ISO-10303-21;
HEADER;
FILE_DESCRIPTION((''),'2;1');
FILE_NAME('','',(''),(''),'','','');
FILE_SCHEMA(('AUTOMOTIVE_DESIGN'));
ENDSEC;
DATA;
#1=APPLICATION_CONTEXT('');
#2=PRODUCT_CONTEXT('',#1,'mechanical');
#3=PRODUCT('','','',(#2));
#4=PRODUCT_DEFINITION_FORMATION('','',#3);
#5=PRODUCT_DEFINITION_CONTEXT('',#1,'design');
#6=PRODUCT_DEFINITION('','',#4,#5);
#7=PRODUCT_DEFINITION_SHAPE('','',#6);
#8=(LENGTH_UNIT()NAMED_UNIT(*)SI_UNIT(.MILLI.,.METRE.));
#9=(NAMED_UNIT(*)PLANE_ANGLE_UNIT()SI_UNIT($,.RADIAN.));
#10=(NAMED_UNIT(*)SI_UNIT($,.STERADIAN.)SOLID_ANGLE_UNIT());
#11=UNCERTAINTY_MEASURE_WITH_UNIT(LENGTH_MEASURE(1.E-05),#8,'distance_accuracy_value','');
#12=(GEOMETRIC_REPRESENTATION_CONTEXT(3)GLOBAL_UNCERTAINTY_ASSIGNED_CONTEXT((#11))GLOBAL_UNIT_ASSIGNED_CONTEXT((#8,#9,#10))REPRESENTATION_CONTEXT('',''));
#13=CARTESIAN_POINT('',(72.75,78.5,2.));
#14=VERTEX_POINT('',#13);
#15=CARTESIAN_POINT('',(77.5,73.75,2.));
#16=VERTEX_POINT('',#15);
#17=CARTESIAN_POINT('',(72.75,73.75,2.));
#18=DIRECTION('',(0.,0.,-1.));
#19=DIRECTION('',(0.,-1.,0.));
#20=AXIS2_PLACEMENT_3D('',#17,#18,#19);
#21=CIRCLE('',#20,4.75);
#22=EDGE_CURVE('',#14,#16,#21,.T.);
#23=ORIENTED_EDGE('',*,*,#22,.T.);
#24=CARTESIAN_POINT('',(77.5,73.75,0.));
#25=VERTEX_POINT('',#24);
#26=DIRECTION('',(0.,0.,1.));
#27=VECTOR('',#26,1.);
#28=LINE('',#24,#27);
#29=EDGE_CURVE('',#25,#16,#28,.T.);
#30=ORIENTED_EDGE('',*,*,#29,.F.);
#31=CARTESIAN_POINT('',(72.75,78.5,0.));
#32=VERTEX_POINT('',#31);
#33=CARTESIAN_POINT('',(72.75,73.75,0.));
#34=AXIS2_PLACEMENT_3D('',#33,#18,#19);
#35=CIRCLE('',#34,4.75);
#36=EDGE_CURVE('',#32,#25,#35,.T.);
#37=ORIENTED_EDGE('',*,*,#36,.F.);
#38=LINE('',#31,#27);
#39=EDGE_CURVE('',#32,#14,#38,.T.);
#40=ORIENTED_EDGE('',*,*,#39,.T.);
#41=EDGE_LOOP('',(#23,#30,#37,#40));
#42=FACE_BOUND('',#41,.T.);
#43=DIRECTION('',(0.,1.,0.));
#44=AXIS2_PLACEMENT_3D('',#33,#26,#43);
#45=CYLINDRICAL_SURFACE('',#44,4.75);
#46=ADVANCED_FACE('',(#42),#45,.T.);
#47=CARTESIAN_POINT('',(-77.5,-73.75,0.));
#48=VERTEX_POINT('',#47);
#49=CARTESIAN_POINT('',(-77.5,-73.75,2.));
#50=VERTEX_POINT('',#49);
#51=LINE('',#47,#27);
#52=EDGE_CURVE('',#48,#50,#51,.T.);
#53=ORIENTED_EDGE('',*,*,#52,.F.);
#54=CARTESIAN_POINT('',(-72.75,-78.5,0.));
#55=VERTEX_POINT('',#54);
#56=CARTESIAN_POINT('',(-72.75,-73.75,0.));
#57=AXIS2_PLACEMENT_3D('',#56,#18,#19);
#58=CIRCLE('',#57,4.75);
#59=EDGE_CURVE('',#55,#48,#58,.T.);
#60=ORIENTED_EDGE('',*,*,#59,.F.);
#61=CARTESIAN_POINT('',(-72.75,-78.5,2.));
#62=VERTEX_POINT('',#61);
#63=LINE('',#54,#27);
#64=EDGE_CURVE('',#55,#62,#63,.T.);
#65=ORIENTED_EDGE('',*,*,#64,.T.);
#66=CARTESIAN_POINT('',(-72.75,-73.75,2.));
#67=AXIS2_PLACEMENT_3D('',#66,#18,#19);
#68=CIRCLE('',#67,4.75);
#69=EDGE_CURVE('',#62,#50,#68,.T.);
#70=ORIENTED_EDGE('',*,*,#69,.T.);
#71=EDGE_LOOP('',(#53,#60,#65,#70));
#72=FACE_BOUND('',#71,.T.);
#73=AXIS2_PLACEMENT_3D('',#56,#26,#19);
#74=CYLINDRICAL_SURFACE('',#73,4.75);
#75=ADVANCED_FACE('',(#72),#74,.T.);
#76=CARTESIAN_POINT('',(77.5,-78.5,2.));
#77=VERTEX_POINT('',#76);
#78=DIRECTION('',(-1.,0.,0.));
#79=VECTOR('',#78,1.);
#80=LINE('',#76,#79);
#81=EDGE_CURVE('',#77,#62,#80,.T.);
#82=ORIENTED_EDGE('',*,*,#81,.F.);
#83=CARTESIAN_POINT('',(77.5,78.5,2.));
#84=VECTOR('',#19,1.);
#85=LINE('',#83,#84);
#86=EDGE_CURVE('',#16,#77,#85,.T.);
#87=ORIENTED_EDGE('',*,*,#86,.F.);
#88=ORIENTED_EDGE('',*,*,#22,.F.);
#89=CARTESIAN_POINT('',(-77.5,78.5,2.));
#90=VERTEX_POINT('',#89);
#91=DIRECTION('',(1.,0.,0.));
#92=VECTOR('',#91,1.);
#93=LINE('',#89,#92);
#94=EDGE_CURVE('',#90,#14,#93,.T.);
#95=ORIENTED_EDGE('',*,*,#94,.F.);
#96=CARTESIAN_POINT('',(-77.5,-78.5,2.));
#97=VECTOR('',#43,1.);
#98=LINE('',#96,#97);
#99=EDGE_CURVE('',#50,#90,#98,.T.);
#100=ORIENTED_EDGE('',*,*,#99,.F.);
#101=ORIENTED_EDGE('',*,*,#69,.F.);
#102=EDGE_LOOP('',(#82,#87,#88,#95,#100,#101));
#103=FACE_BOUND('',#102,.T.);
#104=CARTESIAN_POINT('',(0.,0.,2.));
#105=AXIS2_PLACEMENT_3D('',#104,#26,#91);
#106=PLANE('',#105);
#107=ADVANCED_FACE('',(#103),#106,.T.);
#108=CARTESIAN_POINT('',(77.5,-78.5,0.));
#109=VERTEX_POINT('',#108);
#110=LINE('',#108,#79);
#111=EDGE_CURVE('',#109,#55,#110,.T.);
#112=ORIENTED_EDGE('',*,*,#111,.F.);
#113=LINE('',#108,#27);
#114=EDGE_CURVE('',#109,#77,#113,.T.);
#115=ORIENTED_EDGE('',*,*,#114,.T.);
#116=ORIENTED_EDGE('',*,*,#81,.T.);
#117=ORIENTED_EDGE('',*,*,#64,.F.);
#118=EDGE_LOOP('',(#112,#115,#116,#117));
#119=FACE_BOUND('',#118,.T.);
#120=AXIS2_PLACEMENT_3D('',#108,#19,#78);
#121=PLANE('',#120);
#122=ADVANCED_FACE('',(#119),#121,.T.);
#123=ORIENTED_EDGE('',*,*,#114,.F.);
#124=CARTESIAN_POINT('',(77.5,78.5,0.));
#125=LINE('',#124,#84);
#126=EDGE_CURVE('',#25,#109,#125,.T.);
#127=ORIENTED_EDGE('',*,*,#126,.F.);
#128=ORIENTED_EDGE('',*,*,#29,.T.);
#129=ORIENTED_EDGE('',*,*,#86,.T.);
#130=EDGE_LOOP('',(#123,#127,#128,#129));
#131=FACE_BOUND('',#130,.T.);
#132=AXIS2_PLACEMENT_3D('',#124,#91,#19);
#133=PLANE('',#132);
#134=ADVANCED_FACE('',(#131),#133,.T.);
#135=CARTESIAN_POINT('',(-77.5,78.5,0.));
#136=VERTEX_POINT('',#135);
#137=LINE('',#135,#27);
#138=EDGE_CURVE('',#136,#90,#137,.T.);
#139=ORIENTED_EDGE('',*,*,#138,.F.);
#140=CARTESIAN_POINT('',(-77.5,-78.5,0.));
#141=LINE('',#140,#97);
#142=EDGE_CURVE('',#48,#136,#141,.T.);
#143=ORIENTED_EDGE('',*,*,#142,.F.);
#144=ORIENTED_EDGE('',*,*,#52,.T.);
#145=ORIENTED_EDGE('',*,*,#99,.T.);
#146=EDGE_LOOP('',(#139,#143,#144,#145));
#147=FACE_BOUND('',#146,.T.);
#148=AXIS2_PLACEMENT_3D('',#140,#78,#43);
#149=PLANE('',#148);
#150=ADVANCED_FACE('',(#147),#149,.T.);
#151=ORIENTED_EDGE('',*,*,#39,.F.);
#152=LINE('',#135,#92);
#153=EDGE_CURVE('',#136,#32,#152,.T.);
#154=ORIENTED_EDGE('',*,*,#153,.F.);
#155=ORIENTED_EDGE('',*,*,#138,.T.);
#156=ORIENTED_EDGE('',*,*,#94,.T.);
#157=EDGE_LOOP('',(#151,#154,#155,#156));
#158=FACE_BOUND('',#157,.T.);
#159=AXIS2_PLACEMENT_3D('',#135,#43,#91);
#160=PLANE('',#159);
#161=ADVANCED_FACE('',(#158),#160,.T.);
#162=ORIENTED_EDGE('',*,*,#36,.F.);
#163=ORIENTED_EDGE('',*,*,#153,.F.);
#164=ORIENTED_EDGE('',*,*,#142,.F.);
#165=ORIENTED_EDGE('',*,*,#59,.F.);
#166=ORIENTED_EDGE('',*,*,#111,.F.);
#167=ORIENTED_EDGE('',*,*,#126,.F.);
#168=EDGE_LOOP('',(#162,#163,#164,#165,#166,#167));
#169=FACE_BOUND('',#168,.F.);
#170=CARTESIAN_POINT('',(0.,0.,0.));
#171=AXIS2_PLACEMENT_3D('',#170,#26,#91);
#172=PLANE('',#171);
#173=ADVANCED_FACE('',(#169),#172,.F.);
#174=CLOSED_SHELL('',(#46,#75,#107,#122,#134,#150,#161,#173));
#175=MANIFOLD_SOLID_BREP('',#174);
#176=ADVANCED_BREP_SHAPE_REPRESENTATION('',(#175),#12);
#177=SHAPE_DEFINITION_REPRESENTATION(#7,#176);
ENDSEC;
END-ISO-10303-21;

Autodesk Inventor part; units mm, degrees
ref_plane "YZ Plane" through (0, 0, 0) normal (1, 0, 0) x (0, 1, 0)
ref_plane "XZ Plane" through (0, 0, 0) normal (0, 1, 0) x (-1, 0, 0)
ref_plane "XY Plane" through (0, 0, 0) normal (0, 0, 1) x (1, 0, 0)
sketch "Sketch1" plane through (0, 0, 0) normal (0, 0, 1) x (1, 0, 0)
  line L0 (-77.5, 78.5) -> (77.5, 78.5)
  line L1 (77.5, 78.5) -> (77.5, -78.5)
  line L2 (77.5, -78.5) -> (-77.5, -78.5)
  line L3 (-77.5, -78.5) -> (-77.5, 78.5)
  line L4 (-77.5, 78.5) -> (77.5, -78.5) construction
  point P0 (0, 0)
  point P1 (0, 0)
  dimension "d0" = 155
  dimension "d1" = 157
extrude "Plate1" add sketch "Sketch1" along normal blind 2
fillet "Corner Round1" radius 4.75 2 edges at (77.5, 78.5, 1) (-77.5, -78.5, 1)
equation "\"d2\" = Thickness"
equation "\"BendReliefWidth\" = Thickness"
equation "\"BendReliefDepth\" = 0.5 * Thickness"
equation "\"CornerReliefSize\" = 4 * Thickness"
equation "\"MinimumRemnant\" = 2 * Thickness"
equation "\"TransitionRadius\" = BendRadius"
equation "\"JacobiRadiusSize\" = BendRadius"
equation "\"GapSize\" = Thickness"
equation "\"Thickness\" = 2"
equation "\"BendRadius\" = 2.75"
properties part number "MNT-CDF-601 CAP" material "Stainless Steel"
